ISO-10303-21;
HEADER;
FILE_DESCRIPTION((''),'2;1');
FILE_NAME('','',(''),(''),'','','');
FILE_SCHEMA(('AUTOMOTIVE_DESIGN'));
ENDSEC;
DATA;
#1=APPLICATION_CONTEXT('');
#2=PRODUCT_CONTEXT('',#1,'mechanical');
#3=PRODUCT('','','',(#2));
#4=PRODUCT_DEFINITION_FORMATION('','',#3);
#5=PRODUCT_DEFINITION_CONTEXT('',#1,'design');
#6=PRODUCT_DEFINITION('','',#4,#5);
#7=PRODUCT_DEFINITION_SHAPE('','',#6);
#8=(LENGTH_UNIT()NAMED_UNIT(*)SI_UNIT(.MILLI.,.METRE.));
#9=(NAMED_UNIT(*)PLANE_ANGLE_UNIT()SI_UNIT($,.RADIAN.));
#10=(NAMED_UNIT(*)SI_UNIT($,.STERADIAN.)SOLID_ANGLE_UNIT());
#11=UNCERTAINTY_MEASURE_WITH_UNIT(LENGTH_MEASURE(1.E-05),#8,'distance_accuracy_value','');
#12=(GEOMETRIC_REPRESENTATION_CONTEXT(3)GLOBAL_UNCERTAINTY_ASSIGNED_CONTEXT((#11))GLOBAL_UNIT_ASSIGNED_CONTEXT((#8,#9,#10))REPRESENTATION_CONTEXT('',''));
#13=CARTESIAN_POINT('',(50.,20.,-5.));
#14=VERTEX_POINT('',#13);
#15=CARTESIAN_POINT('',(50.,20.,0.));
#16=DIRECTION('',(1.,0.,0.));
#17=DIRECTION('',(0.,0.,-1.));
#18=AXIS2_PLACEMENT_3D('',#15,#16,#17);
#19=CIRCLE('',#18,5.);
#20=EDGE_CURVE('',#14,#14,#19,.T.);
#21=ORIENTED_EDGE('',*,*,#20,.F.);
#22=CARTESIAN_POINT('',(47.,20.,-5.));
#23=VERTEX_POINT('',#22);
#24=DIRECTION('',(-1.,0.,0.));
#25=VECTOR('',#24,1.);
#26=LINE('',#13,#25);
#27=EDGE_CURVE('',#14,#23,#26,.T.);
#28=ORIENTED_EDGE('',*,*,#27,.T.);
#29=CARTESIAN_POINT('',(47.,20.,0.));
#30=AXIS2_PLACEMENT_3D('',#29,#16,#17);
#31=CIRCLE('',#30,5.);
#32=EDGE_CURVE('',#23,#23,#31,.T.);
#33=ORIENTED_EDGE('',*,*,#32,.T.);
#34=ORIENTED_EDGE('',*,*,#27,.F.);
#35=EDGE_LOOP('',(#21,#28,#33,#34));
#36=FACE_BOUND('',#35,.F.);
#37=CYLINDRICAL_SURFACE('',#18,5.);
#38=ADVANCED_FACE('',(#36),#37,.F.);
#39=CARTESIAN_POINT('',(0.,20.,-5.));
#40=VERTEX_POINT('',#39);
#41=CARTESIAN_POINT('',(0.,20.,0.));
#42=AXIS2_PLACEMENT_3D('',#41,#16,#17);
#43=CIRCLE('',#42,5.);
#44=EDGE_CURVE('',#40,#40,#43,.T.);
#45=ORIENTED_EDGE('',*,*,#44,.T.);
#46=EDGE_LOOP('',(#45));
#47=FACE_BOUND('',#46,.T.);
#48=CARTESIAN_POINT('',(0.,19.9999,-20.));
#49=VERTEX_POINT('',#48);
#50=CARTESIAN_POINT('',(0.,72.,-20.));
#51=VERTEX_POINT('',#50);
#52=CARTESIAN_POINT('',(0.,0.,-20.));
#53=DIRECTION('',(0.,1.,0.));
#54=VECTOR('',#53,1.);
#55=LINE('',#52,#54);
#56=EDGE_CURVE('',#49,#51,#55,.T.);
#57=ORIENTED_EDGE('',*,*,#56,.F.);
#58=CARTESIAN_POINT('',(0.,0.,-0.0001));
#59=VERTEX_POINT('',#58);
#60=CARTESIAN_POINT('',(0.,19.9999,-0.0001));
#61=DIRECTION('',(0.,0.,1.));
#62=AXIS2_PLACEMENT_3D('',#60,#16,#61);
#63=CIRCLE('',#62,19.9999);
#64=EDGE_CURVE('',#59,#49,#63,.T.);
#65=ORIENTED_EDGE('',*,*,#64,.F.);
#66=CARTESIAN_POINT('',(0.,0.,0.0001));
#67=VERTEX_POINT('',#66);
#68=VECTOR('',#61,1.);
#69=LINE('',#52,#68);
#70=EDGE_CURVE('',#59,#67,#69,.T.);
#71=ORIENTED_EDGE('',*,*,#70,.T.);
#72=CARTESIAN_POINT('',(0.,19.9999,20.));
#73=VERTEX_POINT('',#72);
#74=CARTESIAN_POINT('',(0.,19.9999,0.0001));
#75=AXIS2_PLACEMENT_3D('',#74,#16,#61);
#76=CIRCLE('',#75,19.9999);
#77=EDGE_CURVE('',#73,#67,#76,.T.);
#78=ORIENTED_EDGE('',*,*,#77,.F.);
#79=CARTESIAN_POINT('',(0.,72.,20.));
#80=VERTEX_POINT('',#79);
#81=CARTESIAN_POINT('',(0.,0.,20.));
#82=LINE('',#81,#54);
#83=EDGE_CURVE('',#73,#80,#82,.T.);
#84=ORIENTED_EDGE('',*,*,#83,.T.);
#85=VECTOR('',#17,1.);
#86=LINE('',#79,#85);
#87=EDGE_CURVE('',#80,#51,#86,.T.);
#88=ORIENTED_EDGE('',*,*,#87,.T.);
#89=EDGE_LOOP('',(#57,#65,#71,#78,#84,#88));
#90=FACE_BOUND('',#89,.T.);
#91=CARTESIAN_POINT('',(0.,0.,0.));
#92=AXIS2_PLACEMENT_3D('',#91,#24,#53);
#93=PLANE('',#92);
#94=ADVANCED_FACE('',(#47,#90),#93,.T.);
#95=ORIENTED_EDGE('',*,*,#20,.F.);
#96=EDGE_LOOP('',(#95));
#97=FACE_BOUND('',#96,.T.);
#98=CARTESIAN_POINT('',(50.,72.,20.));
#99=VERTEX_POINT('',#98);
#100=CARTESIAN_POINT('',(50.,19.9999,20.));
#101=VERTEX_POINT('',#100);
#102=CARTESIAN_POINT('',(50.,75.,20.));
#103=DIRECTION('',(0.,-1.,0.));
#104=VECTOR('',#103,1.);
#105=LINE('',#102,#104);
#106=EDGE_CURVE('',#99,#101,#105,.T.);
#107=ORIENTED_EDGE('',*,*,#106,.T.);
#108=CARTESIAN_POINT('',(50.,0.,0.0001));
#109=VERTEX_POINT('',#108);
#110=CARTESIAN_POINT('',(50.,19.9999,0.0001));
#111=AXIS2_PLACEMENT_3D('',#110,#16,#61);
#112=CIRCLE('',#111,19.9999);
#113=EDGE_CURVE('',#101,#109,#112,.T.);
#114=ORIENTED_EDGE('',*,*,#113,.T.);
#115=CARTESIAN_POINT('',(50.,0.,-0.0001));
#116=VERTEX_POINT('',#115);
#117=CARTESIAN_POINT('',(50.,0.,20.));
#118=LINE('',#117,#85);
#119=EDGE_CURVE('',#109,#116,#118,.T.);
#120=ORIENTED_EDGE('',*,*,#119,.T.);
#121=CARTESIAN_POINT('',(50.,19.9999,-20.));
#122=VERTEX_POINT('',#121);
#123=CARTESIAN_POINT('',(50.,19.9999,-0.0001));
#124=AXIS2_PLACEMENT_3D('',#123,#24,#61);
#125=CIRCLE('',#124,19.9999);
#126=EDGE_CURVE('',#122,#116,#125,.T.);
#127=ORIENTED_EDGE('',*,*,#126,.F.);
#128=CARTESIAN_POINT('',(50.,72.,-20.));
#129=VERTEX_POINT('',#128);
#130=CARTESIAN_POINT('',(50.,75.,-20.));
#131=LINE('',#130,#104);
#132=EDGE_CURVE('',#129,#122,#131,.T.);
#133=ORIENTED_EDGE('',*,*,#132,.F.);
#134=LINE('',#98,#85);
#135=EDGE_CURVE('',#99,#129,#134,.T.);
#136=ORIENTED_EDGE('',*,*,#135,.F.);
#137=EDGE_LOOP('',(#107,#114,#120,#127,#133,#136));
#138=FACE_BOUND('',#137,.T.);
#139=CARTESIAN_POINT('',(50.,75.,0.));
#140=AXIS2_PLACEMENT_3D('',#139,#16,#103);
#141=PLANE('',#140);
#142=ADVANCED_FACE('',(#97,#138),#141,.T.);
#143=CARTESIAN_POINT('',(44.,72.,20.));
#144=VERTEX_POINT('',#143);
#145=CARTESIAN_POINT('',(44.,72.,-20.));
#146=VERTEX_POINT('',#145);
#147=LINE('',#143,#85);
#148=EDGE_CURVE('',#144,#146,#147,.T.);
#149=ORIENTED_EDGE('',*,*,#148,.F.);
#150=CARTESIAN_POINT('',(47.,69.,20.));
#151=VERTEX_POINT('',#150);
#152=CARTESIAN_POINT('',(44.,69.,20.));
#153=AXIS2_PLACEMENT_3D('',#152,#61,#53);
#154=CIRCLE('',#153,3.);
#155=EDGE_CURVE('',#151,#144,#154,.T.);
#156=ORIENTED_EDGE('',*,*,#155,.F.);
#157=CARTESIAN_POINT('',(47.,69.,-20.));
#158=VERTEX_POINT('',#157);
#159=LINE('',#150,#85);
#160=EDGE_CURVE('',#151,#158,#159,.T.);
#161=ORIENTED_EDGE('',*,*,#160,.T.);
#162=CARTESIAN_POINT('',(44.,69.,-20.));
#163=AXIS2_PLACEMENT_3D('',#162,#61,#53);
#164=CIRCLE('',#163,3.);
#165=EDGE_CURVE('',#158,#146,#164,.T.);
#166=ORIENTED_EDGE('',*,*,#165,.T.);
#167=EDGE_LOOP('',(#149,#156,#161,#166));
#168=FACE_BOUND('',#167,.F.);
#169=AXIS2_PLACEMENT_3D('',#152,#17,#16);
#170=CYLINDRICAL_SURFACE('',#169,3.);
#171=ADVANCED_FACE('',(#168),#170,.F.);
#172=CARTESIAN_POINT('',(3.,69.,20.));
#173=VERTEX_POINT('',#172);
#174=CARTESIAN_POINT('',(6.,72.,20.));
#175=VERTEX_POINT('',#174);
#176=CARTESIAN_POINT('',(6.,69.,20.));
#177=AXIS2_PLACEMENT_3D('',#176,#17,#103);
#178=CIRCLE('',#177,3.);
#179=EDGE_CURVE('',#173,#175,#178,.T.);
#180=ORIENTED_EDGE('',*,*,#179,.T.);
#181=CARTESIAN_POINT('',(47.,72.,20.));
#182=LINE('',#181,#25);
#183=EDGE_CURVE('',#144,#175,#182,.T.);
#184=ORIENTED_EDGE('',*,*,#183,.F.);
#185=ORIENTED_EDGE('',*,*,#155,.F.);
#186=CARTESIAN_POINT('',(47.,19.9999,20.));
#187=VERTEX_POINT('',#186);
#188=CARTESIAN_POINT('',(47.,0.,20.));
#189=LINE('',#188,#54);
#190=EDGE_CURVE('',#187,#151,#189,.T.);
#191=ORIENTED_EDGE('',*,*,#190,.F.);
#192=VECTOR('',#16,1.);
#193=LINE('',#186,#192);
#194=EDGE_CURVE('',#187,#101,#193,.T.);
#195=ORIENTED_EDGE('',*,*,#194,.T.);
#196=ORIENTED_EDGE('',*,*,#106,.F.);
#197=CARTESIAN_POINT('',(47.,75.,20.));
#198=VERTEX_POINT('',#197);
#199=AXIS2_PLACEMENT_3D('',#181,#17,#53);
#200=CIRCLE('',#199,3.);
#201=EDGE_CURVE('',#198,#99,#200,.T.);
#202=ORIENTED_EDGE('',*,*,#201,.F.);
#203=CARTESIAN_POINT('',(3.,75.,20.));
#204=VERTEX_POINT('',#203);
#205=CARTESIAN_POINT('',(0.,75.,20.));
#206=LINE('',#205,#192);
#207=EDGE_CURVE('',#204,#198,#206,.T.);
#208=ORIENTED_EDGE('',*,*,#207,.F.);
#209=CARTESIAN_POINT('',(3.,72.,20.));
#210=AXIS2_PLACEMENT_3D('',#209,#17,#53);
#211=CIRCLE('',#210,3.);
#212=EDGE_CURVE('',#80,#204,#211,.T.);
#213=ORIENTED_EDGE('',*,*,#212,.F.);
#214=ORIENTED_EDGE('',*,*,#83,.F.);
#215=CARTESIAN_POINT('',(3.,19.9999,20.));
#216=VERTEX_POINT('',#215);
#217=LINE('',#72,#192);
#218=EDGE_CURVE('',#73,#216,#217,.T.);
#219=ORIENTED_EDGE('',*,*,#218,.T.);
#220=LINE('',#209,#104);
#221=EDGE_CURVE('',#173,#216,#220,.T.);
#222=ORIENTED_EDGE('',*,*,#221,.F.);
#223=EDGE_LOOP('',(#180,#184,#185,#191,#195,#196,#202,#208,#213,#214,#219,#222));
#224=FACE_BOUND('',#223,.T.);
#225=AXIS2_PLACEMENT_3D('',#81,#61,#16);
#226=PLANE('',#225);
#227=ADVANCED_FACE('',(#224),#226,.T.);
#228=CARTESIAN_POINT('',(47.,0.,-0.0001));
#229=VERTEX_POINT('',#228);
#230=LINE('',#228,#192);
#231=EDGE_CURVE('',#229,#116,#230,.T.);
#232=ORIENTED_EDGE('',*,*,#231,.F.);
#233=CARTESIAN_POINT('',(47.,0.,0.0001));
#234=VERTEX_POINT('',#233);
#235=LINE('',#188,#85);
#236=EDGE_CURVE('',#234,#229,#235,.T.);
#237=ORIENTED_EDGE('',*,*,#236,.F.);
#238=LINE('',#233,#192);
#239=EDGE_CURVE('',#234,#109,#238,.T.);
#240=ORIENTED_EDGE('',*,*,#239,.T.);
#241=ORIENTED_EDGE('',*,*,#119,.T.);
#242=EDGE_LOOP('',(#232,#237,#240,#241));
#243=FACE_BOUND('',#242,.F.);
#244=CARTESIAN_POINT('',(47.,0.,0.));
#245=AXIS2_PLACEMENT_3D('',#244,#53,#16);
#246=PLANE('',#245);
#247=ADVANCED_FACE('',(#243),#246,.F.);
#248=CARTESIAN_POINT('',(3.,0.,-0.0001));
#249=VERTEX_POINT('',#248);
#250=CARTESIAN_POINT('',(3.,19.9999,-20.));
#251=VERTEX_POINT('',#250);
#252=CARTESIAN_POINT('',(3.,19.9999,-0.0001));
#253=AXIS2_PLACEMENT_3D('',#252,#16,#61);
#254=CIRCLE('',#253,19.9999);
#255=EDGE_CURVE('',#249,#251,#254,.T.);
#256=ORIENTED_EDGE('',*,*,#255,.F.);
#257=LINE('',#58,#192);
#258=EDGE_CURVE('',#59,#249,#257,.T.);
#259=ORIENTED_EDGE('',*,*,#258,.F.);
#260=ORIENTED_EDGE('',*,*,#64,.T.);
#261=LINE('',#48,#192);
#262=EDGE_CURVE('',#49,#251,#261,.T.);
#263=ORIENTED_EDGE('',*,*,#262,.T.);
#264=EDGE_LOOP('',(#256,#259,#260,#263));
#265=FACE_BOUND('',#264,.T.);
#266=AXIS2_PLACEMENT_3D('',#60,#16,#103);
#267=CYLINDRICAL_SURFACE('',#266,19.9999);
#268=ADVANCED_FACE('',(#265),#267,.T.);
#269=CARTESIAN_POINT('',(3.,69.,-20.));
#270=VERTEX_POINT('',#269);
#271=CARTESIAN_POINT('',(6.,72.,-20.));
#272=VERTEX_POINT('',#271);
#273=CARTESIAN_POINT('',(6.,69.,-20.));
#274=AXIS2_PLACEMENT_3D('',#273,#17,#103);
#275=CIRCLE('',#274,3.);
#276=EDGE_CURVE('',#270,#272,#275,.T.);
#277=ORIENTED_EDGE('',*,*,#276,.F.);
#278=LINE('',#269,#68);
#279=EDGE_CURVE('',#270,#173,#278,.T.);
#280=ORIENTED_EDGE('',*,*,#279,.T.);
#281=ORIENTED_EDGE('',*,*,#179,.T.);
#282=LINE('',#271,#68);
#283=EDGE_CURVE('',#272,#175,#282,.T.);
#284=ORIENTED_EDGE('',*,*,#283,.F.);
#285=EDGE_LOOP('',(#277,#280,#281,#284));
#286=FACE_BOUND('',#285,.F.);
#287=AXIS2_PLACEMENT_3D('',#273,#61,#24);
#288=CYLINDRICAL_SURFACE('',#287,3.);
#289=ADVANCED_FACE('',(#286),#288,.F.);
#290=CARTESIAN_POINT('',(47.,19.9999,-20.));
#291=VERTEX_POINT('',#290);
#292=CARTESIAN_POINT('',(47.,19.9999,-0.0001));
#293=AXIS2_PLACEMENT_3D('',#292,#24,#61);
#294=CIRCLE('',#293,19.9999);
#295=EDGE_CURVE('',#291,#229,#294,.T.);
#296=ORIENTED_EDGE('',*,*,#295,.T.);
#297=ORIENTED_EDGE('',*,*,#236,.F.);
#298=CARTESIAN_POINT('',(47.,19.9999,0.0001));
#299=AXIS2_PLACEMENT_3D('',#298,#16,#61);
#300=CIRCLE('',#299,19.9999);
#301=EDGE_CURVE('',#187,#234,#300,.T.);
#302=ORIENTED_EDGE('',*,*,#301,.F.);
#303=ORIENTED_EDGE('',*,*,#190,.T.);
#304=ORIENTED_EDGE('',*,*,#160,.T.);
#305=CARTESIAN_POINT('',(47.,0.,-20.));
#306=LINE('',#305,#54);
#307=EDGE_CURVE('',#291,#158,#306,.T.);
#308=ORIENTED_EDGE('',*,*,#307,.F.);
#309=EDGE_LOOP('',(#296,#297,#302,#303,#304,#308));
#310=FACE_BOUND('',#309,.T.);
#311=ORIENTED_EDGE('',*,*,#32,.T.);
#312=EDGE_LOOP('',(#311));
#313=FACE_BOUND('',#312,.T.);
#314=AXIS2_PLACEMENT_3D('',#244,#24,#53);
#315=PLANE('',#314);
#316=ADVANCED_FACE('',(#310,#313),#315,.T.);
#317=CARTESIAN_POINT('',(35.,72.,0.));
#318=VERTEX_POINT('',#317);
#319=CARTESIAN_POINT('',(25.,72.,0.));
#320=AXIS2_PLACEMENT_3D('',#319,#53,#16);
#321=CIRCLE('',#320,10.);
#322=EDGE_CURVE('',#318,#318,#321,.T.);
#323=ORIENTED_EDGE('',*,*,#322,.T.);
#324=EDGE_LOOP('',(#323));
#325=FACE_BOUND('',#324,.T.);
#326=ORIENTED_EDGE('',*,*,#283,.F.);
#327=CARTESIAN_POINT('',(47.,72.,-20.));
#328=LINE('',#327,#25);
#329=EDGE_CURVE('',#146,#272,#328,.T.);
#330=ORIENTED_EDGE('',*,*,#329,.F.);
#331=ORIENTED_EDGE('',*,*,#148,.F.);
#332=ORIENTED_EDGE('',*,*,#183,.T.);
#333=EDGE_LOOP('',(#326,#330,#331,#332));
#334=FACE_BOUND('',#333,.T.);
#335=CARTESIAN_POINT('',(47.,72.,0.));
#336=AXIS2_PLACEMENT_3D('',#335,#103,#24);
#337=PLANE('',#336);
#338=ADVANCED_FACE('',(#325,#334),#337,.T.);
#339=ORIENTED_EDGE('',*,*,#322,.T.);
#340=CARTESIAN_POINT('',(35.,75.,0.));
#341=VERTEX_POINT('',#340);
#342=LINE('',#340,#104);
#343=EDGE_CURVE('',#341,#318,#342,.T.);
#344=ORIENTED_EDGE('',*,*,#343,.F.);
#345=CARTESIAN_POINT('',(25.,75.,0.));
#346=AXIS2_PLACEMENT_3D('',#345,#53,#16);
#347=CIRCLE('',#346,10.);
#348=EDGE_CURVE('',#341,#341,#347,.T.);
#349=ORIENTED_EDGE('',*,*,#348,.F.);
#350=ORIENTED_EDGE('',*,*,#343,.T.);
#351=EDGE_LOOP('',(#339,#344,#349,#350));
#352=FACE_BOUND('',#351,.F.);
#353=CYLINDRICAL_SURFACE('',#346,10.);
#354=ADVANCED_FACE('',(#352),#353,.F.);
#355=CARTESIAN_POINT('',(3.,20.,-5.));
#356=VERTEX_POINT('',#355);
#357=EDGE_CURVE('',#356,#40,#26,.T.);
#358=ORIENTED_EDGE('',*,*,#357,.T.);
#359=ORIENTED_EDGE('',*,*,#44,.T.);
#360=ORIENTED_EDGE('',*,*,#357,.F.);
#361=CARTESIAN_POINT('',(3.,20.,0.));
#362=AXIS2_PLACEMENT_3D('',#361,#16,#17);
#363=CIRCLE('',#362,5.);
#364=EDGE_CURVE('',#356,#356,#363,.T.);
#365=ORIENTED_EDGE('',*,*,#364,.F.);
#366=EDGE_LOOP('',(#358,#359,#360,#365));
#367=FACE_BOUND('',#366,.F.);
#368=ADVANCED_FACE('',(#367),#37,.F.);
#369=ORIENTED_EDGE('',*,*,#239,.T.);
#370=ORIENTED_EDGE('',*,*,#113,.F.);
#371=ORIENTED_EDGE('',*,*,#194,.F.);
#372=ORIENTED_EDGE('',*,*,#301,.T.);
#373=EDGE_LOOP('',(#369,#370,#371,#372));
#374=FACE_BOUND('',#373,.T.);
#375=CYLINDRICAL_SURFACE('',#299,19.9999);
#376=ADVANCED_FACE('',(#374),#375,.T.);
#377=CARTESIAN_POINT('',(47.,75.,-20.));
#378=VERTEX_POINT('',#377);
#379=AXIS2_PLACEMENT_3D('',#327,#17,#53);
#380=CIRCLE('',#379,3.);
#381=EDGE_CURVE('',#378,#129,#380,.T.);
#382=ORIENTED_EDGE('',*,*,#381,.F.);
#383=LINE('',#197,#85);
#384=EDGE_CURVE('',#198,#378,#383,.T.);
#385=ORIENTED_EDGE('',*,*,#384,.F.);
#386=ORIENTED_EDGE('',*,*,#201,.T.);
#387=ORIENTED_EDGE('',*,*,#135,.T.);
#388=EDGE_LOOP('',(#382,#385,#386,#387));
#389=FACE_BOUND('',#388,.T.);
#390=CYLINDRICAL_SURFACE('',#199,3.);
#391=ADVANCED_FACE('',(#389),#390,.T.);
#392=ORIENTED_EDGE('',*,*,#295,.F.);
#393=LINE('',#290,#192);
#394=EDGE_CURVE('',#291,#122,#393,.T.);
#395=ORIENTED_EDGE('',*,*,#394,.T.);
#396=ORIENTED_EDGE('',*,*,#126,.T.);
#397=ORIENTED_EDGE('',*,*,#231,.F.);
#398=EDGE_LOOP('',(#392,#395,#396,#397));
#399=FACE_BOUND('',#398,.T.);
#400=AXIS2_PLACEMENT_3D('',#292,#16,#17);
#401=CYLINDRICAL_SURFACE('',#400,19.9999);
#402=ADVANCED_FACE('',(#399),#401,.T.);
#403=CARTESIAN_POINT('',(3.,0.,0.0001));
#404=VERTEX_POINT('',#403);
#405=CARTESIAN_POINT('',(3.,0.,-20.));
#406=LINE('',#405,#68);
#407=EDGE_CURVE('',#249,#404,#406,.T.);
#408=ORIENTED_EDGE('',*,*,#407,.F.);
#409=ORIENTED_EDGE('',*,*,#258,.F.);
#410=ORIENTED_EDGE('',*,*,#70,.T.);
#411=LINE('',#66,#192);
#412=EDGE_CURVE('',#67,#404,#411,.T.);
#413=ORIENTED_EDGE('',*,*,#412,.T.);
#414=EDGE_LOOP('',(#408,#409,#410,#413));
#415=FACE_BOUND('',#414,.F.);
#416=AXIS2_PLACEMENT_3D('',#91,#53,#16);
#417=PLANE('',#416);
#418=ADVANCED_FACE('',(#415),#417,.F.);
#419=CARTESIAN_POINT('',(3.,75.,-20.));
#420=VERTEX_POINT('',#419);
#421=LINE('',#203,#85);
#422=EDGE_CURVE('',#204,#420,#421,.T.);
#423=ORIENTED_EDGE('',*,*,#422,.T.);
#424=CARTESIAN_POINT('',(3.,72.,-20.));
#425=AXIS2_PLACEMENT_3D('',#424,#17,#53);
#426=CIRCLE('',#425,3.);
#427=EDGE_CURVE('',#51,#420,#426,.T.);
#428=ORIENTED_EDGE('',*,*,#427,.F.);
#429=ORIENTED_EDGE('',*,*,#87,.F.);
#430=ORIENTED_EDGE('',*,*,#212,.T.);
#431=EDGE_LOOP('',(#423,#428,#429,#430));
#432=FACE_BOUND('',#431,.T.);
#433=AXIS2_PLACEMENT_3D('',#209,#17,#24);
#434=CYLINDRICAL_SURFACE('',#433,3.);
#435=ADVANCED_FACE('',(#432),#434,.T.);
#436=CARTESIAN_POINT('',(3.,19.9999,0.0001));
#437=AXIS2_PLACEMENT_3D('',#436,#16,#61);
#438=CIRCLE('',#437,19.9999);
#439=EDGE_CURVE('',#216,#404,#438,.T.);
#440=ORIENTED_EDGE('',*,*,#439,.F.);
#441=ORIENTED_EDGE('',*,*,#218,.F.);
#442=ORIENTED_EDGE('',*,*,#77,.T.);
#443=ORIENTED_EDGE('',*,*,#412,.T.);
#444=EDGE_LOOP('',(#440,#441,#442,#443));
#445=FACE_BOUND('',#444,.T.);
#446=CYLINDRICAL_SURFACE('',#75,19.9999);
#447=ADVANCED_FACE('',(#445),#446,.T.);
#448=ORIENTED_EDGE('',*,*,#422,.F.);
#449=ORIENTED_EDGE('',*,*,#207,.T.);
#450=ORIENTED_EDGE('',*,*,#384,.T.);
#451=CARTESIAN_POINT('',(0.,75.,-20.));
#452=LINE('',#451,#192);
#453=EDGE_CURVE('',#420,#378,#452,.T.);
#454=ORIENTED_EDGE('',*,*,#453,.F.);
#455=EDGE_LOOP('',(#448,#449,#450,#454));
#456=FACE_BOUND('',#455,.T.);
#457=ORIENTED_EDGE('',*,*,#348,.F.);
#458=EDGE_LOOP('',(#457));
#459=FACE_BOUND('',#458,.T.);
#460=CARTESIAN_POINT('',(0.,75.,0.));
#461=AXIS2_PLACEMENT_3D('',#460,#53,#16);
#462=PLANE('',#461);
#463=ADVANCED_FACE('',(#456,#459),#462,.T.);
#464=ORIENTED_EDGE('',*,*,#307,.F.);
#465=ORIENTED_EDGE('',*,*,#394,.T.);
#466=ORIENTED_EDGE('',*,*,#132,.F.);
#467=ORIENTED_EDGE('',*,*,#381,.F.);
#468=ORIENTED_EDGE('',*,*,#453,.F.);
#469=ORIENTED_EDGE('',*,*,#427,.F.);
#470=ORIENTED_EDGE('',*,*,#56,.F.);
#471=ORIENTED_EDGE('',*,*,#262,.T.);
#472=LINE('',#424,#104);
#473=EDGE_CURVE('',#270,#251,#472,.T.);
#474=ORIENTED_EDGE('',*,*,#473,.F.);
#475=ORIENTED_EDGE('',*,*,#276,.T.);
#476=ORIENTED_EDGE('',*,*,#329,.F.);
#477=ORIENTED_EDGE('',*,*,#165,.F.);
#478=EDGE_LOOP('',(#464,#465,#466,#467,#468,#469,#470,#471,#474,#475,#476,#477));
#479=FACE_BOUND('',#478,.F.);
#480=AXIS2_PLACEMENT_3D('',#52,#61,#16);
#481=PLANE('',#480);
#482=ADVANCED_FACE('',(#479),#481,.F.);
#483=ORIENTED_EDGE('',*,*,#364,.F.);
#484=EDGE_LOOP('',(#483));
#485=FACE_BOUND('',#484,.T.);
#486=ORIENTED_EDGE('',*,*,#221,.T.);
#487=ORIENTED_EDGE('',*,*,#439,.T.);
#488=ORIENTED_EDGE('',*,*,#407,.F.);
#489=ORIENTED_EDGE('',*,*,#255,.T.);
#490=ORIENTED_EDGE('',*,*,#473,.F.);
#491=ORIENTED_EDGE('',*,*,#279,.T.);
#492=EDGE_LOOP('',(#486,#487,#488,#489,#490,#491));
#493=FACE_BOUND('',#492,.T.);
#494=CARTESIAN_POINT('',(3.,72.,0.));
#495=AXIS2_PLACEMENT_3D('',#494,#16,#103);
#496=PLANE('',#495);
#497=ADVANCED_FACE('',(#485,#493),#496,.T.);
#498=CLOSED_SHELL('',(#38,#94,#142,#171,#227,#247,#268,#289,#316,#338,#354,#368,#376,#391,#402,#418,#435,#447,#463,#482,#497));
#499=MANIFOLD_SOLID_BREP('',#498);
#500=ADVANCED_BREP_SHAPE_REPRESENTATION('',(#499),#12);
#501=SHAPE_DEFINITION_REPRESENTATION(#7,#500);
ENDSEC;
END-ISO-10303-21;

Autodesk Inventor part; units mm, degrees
ref_plane "YZ Plane" through (0, 0, 0) normal (1, 0, 0) x (0, 1, 0)
ref_plane "XZ Plane" through (0, 0, 0) normal (0, 1, 0) x (-1, 0, 0)
ref_plane "XY Plane" through (0, 0, 0) normal (0, 0, 1) x (1, 0, 0)
sketch "Sketch1" plane through (0, 0, 0) normal (0, 0, 1) x (1, 0, 0)
  line L0 (0, 0) -> (0, 75)
  line L1 (0, 75) -> (50, 75)
  line L2 (50, 75) -> (50, 0)
  line L3 (47, 0) -> (47, 72)
  line L4 (47, 72) -> (3, 72)
  line L5 (3, 72) -> (3, 0)
  line L6 (0, 0) -> (3, 0)
  line L7 (47, 0) -> (50, 0)
  dimension "d0" = 75
  dimension "d1" = 50
  dimension "d2" = 3
extrude "Extrusion1" add sketch "Sketch1" along normal mid plane 40
fillet "Fillet1" radius 3 4 edges at (50, 75, 0) (0, 75, 0) (3, 72, 0) (47, 72, 0)
fillet "Fillet2" radius 20 4 edges at (1.5, 0, 20) (48.5, 0, 20) (1.5, 0, -20) (48.5, 0, -20)
sketch "Sketch2" plane through (50, 72, 20) normal (1, 0, 0) x (0, 0, -1)
  arc A0 (0, -52) -> (40, -52) centre (20, -52) ccw projected
  circle A1 centre (20, -52) radius 5
  point P0 (20, -72)
  dimension "d7" = 10
extrude "Extrusion2" cut sketch "Sketch2" against normal through all
sketch "Sketch3" plane through (3, 75, 20) normal (0, 1, 0) x (1, 0, 0)
  circle A0 centre (22, 20) radius 10
  point P0 (-3, 20)
  dimension "d10" = 20
extrude "Extrusion3" cut sketch "Sketch3" against normal through all
properties material "Steel, Carbon"
